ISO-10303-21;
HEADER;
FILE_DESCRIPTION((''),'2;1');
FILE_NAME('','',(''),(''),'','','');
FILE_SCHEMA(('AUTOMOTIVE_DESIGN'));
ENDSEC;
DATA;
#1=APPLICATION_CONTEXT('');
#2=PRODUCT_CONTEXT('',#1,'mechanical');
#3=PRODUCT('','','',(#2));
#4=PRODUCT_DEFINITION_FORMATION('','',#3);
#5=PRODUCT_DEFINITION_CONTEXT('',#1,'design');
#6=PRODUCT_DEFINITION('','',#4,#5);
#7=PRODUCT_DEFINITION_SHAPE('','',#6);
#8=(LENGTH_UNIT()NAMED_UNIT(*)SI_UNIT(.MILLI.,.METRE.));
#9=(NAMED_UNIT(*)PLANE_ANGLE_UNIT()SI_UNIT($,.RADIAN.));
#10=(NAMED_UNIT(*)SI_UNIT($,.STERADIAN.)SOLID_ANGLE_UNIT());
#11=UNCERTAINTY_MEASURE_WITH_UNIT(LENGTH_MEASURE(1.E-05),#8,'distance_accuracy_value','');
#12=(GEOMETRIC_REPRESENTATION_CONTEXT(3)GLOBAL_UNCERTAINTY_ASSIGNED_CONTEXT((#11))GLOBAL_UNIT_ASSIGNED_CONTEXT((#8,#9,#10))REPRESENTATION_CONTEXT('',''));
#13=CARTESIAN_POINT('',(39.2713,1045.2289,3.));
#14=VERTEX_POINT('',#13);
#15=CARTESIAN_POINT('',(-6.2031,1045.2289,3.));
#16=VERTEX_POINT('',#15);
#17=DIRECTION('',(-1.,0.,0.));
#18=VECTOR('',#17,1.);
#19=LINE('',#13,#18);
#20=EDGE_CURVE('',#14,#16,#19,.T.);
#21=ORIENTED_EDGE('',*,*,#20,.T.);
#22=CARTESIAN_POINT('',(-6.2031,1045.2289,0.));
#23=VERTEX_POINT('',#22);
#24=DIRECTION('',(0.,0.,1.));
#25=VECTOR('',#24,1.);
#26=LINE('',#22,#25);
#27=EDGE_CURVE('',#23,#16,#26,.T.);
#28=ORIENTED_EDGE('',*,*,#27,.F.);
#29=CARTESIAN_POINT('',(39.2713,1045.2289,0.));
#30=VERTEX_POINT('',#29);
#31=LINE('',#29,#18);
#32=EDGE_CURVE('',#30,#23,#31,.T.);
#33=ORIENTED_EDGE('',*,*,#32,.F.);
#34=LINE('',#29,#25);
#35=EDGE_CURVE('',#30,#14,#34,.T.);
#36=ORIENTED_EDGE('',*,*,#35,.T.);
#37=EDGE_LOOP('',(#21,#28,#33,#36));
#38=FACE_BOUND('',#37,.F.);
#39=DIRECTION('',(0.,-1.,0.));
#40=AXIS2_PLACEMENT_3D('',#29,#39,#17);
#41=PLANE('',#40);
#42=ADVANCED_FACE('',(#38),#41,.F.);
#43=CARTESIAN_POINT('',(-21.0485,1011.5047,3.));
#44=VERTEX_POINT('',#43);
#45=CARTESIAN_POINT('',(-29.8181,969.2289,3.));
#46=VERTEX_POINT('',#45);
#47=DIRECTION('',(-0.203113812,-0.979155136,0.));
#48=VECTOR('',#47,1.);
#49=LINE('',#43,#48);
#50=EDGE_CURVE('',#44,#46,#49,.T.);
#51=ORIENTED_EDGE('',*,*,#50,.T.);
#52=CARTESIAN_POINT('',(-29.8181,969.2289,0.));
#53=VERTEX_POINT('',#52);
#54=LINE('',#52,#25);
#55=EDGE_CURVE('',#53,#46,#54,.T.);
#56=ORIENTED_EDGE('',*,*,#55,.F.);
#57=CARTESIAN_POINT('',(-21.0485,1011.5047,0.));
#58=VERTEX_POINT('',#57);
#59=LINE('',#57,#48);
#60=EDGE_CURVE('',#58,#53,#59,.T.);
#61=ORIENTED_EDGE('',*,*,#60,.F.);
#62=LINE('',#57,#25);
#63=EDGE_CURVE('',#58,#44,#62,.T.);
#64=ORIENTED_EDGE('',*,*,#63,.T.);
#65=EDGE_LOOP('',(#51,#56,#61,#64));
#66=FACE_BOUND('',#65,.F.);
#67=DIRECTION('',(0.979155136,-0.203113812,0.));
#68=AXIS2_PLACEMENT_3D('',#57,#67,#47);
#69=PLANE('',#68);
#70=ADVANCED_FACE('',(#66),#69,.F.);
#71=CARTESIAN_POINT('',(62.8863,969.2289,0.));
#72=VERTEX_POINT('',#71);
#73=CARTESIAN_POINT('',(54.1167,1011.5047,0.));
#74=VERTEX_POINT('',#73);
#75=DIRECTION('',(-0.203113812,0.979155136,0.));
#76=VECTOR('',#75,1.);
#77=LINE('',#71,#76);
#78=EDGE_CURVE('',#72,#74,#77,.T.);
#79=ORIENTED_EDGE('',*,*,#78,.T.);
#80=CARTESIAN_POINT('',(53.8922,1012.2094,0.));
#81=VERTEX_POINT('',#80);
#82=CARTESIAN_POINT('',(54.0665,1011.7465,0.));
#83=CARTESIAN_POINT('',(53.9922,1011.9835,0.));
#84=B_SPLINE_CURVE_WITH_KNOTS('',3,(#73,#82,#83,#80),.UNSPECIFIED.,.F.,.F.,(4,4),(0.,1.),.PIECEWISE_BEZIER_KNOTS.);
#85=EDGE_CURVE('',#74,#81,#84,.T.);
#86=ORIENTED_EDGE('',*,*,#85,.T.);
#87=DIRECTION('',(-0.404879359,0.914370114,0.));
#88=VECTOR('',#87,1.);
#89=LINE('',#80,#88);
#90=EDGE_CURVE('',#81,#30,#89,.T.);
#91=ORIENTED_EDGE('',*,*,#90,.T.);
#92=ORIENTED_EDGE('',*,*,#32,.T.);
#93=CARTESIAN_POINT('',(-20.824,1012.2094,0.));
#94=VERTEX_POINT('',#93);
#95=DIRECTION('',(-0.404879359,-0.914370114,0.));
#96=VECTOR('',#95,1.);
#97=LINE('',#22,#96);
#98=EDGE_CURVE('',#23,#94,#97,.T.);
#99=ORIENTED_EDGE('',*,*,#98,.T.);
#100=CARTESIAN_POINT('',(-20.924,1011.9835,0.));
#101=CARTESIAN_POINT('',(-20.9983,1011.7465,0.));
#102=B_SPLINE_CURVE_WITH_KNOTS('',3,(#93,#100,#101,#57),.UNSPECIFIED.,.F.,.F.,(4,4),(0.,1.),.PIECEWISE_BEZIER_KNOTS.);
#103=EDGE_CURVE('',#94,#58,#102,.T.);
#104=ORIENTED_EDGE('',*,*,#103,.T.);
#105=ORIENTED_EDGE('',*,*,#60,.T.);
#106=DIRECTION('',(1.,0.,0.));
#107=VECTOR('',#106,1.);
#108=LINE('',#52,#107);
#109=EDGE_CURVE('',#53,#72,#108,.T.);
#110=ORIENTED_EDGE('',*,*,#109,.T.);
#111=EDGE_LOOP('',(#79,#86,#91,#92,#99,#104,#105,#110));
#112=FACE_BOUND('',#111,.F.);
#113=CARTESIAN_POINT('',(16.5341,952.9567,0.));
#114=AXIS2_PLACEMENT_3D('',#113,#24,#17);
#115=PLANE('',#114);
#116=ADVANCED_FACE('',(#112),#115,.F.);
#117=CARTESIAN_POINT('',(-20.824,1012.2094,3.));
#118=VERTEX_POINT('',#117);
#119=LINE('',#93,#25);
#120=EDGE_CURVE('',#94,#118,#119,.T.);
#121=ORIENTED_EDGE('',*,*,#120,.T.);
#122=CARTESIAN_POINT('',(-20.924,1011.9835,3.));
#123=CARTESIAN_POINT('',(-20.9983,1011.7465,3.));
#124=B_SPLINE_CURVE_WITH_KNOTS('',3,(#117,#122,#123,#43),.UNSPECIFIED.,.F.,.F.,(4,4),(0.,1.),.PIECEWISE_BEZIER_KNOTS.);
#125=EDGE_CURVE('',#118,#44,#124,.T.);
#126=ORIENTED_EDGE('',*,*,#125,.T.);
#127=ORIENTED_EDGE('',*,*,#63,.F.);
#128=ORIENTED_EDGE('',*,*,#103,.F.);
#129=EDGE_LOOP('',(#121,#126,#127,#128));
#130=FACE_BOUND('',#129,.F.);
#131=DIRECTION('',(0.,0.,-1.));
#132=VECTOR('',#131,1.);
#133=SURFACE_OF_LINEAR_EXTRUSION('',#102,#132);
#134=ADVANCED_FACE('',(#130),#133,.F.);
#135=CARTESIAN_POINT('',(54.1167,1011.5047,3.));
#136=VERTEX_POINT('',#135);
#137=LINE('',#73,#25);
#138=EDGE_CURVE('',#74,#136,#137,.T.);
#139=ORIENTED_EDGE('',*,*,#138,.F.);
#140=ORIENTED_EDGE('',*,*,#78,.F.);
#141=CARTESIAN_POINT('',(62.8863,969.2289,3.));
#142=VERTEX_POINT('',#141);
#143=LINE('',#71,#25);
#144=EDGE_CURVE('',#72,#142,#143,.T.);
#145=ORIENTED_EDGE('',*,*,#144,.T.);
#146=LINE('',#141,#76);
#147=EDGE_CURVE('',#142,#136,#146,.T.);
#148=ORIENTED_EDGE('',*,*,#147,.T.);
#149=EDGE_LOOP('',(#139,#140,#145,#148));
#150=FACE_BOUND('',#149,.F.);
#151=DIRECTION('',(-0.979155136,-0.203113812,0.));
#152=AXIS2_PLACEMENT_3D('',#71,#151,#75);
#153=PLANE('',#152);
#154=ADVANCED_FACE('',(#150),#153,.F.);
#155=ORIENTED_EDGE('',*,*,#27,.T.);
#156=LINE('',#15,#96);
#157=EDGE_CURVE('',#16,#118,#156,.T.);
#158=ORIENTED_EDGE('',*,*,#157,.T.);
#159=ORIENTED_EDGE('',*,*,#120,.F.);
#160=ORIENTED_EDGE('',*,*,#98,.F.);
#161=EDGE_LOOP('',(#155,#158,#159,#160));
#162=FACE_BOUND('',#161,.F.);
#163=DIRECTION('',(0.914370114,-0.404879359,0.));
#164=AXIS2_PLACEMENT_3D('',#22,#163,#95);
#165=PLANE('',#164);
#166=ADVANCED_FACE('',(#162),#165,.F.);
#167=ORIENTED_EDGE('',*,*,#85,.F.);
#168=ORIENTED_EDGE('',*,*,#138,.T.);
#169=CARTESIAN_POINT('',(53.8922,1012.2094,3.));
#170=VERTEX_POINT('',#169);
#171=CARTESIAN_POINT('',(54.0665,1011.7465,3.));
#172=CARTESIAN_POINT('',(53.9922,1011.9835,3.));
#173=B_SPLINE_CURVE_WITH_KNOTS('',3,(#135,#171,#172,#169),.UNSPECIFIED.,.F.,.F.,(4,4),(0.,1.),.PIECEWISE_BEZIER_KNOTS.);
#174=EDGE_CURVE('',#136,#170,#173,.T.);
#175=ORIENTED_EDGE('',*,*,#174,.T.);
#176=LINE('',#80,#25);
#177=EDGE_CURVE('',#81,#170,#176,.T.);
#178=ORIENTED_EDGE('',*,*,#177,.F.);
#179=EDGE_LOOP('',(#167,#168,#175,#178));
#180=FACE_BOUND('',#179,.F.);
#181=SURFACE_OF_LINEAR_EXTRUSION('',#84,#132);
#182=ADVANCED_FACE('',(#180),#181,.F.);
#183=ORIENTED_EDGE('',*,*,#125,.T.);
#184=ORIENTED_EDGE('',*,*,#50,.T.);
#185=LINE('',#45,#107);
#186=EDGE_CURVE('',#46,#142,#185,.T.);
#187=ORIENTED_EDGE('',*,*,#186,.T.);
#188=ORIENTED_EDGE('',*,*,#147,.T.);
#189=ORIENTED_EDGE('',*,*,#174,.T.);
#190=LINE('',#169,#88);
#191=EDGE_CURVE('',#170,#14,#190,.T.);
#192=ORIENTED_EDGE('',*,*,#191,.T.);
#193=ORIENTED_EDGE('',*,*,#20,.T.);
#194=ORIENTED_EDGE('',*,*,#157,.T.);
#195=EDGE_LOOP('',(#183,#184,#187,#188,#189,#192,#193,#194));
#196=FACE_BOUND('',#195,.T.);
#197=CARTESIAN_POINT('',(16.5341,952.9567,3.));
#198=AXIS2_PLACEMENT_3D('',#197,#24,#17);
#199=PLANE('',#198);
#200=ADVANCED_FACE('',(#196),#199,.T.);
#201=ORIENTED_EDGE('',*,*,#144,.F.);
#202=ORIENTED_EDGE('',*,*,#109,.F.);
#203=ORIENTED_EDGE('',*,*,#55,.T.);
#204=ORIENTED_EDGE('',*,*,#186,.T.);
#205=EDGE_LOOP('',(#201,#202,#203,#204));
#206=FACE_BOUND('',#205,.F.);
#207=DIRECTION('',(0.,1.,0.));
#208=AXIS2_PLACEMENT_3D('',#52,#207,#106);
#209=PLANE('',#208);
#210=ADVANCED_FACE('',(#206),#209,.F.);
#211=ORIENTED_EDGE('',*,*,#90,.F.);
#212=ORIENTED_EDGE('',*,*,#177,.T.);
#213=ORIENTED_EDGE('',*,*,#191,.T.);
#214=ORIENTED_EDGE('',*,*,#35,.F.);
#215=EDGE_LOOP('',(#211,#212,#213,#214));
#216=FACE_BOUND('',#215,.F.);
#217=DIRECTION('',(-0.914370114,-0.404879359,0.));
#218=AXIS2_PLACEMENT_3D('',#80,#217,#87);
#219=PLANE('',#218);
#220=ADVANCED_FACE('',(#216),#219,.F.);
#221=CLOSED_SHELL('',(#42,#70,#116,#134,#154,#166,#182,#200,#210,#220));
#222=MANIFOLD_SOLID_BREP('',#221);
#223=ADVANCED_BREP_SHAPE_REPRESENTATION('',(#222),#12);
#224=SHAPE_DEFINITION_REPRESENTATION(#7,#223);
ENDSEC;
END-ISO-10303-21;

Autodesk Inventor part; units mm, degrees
ref_plane "YZ Plane" through (0, 0, 0) normal (1, 0, 0) x (0, 1, 0)
ref_plane "XZ Plane" through (0, 0, 0) normal (0, 1, 0) x (-1, 0, 0)
ref_plane "Work Plane1" through (16.5341, 952.9567, 0) normal (0, 0, 1) x (-1, 0, 0)
sketch "Sketch1" plane through (16.5341, 952.9567, 0) normal (0, 0, 1) x (-1, 0, 0)
  line L0 (60, 40.2719) -> (60, 137.1193)
  ellipse E0 centre (56, 137.1193) end of major axis (56, 141.9614) minor radius 4 (60, 137.1193) -> (56, 141.9614) ccw
  line L1 (56, 141.9614) -> (24.75, 141.9614)
  line L2 (24.75, 141.9614) -> (24.75, 144.3824)
  line L3 (24.75, 144.3824) -> (24.75, 146.8034)
  line L4 (24.75, 146.8034) -> (56, 146.8034)
  ellipse E1 centre (56, 137.1193) end of major axis (56, 146.8034) minor radius 8 (64, 137.1193) -> (56, 146.8034) ccw
  line L5 (64, 137.1193) -> (64, 40.2719)
  ellipse E2 centre (56, 40.2719) end of major axis (56, 30.5879) minor radius 8 (63.7591, 37.9134) -> (64, 40.2719) ccw
  line L6 (63.7591, 37.9134) -> (43.4204, -60.1335)
  ellipse E3 centre (35.6613, -57.775) end of major axis (35.6613, -67.459) minor radius 8 (42.7123, -62.3499) -> (43.4204, -60.1335) ccw
  line L7 (42.7123, -62.3499) -> (7.051, -142.8866)
  ellipse E4 centre (0, -138.3116) end of major axis (0, -147.9957) minor radius 8 (-7.051, -142.8866) -> (7.051, -142.8866) ccw
  line L8 (-7.051, -142.8866) -> (-42.7123, -62.3499)
  ellipse E5 centre (-35.6613, -57.775) end of major axis (-35.6613, -67.459) minor radius 8 (-43.4204, -60.1335) -> (-42.7123, -62.3499) ccw
  line L9 (-43.4204, -60.1335) -> (-63.7591, 37.9134)
  ellipse E6 centre (-56, 40.2719) end of major axis (-56, 30.5879) minor radius 8 (-64, 40.2719) -> (-63.7591, 37.9134) ccw
  line L10 (-64, 40.2719) -> (-64, 137.1193)
  ellipse E7 centre (-56, 137.1193) end of major axis (-56, 146.8034) minor radius 8 (-56, 146.8034) -> (-64, 137.1193) ccw
  line L11 (-56, 146.8034) -> (-24.75, 146.8034)
  line L12 (-24.75, 146.8034) -> (-24.75, 144.3824)
  line L13 (-24.75, 144.3824) -> (-24.75, 141.9614)
  line L14 (-24.75, 141.9614) -> (-56, 141.9614)
  ellipse E8 centre (-56, 137.1193) end of major axis (-56, 141.9614) minor radius 4 (-56, 141.9614) -> (-60, 137.1193) ccw
  line L15 (-60, 137.1193) -> (-60, 40.2719)
  ellipse E9 centre (-56, 40.2719) end of major axis (-56, 35.4299) minor radius 4 (-60, 40.2719) -> (-59.8796, 39.0927) ccw
  line L16 (-59.8796, 39.0927) -> (-39.5409, -58.9542)
  ellipse E10 centre (-35.6613, -57.775) end of major axis (-35.6613, -62.617) minor radius 4 (-39.5409, -58.9542) -> (-39.1868, -60.0624) ccw
  line L17 (-39.1868, -60.0624) -> (-3.5255, -140.5991)
  ellipse E11 centre (0, -138.3116) end of major axis (0, -143.1536) minor radius 4 (-3.5255, -140.5991) -> (3.5255, -140.5991) ccw
  line L18 (3.5255, -140.5991) -> (39.1868, -60.0624)
  ellipse E12 centre (35.6613, -57.775) end of major axis (35.6613, -62.617) minor radius 4 (39.1868, -60.0624) -> (39.5409, -58.9542) ccw
  line L19 (39.5409, -58.9542) -> (59.8796, 39.0927)
  ellipse E13 centre (56, 40.2719) end of major axis (56, 35.4299) minor radius 4 (59.8796, 39.0927) -> (60, 40.2719) ccw
  line L20 (-24.75, 141.9614) -> (24.75, 141.9614)
  line L21 (-24.0389, -94.2722) -> (24.0389, -94.2722)
  line L22 (-48.8096, -14.2722) -> (48.8096, -14.2722)
  point P0 (16.5341, 952.9567)
  point P1 (60, -19.5271)
  dimension "d3" = 88.0788
  dimension "d4" = 44.0394
  dimension "d12" = 80
extrude "Plate1" add sketch "Sketch1" along normal blind 3 contours L19 E12 L18 L21 L17 E10 L16 L22
ref_plane "modplan parallel med plade" through (16.5341, 952.9567, 1.5) normal (0, 0, 1) x (1, 0, 0)
sketch "Sketch3" plane through (16.5341, 952.9567, 0) normal (0, 0, -1) x (-1, 0, 0)
  ellipse E0 centre (-35.6613, 57.775) end of major axis (-35.6613, 62.617) minor radius 4 (-39.1868, 60.0624) -> (-39.5409, 58.9542) ccw projected
  line L0 (-48.8096, 14.2722) -> (-39.5409, 58.9542) projected
  line L1 (48.8096, 14.2722) -> (-48.8096, 14.2722) projected
  line L2 (39.5409, 58.9542) -> (48.8096, 14.2722) projected
  ellipse E1 centre (35.6613, 57.775) end of major axis (35.6613, 62.617) minor radius 4 (39.5409, 58.9542) -> (39.1868, 60.0624) ccw projected
  line L3 (24.0389, 94.2722) -> (39.1868, 60.0624) projected
  line L4 (-24.0389, 94.2722) -> (24.0389, 94.2722) projected
  line L5 (-39.1868, 60.0624) -> (-24.0389, 94.2722) projected
  line L6 (-37.3581, 59.2527) -> (-22.7372, 92.2722)
  line L7 (-22.7372, 92.2722) -> (22.7372, 92.2722)
  line L8 (22.7372, 92.2722) -> (37.3581, 59.2527)
  line L9 (37.5826, 58.548) -> (46.3522, 16.2722)
  line L10 (46.3522, 16.2722) -> (-46.3522, 16.2722)
  line L11 (-46.3522, 16.2722) -> (-37.5826, 58.548)
  spline S0 degree 3 poles (-37.5826, 58.548) (-37.5324, 58.7898) (-37.4581, 59.0268) (-37.3581, 59.2527) knots 0 0 0 0 1 1 1 1
  spline S1 degree 3 poles (37.3581, 59.2527) (37.4581, 59.0268) (37.5324, 58.7898) (37.5826, 58.548) knots 0 0 0 0 1 1 1 1
  point P0 (16.5341, -952.9567)
  dimension "d14" = 2
extrude "2 mm mindre" cut sketch "Sketch3" against normal blind 3
ref_plane "midtplan" through (16.5341, 1192.6796, 0) normal (-1, 0, 0) x (0, 0, 1)
equation "\"d4\" = 0.5 * d3"
equation "\"d15\" = Thickness"
equation "\"d8\" = Thickness"
equation "\"Thickness\" = pladetykkelse"
equation "\"BendRadius\" = Thickness"
equation "\"BendReliefWidth\" = Thickness"
equation "\"BendReliefDepth\" = 0.5 * Thickness"
equation "\"CornerReliefSize\" = 4 * Thickness"
equation "\"MinimumRemnant\" = 2 * Thickness"
equation "\"TransitionRadius\" = BendRadius"
equation "\"JacobiRadiusSize\" = BendRadius"
equation "\"GapSize\" = Thickness"
equation "\"pladetykkelse\" = 3"
equation "\"trappevinkel\" = 34.3deg"
equation "\"trappestifter_dia\" = 25"
equation "\"trappestifter_huldia\" = 25.8"
equation "\"trappestifter_skraa_huldia\" = 26.6"
equation "\"trappestifter_laengde\" = 228"
equation "\"perforeringsbredde\" = 6"
equation "\"perforeringshullaengde\" = 62.8"
equation "\"perforeringshullaengde_top\" = 61"
equation "\"perforeringshullaengde_bund\" = 61.6"
equation "\"perforeringsoffset\" = 8"
equation "\"perforeringsoffset_top\" = 8"
equation "\"perforeringsoffset_bund\" = 8"
equation "\"laskehul_dia\" = 13"
equation "\"balusterhul_udvidelse\" = 1"
equation "\"trinbredde\" = 1884"
properties part number "skot" material "S355MC"
